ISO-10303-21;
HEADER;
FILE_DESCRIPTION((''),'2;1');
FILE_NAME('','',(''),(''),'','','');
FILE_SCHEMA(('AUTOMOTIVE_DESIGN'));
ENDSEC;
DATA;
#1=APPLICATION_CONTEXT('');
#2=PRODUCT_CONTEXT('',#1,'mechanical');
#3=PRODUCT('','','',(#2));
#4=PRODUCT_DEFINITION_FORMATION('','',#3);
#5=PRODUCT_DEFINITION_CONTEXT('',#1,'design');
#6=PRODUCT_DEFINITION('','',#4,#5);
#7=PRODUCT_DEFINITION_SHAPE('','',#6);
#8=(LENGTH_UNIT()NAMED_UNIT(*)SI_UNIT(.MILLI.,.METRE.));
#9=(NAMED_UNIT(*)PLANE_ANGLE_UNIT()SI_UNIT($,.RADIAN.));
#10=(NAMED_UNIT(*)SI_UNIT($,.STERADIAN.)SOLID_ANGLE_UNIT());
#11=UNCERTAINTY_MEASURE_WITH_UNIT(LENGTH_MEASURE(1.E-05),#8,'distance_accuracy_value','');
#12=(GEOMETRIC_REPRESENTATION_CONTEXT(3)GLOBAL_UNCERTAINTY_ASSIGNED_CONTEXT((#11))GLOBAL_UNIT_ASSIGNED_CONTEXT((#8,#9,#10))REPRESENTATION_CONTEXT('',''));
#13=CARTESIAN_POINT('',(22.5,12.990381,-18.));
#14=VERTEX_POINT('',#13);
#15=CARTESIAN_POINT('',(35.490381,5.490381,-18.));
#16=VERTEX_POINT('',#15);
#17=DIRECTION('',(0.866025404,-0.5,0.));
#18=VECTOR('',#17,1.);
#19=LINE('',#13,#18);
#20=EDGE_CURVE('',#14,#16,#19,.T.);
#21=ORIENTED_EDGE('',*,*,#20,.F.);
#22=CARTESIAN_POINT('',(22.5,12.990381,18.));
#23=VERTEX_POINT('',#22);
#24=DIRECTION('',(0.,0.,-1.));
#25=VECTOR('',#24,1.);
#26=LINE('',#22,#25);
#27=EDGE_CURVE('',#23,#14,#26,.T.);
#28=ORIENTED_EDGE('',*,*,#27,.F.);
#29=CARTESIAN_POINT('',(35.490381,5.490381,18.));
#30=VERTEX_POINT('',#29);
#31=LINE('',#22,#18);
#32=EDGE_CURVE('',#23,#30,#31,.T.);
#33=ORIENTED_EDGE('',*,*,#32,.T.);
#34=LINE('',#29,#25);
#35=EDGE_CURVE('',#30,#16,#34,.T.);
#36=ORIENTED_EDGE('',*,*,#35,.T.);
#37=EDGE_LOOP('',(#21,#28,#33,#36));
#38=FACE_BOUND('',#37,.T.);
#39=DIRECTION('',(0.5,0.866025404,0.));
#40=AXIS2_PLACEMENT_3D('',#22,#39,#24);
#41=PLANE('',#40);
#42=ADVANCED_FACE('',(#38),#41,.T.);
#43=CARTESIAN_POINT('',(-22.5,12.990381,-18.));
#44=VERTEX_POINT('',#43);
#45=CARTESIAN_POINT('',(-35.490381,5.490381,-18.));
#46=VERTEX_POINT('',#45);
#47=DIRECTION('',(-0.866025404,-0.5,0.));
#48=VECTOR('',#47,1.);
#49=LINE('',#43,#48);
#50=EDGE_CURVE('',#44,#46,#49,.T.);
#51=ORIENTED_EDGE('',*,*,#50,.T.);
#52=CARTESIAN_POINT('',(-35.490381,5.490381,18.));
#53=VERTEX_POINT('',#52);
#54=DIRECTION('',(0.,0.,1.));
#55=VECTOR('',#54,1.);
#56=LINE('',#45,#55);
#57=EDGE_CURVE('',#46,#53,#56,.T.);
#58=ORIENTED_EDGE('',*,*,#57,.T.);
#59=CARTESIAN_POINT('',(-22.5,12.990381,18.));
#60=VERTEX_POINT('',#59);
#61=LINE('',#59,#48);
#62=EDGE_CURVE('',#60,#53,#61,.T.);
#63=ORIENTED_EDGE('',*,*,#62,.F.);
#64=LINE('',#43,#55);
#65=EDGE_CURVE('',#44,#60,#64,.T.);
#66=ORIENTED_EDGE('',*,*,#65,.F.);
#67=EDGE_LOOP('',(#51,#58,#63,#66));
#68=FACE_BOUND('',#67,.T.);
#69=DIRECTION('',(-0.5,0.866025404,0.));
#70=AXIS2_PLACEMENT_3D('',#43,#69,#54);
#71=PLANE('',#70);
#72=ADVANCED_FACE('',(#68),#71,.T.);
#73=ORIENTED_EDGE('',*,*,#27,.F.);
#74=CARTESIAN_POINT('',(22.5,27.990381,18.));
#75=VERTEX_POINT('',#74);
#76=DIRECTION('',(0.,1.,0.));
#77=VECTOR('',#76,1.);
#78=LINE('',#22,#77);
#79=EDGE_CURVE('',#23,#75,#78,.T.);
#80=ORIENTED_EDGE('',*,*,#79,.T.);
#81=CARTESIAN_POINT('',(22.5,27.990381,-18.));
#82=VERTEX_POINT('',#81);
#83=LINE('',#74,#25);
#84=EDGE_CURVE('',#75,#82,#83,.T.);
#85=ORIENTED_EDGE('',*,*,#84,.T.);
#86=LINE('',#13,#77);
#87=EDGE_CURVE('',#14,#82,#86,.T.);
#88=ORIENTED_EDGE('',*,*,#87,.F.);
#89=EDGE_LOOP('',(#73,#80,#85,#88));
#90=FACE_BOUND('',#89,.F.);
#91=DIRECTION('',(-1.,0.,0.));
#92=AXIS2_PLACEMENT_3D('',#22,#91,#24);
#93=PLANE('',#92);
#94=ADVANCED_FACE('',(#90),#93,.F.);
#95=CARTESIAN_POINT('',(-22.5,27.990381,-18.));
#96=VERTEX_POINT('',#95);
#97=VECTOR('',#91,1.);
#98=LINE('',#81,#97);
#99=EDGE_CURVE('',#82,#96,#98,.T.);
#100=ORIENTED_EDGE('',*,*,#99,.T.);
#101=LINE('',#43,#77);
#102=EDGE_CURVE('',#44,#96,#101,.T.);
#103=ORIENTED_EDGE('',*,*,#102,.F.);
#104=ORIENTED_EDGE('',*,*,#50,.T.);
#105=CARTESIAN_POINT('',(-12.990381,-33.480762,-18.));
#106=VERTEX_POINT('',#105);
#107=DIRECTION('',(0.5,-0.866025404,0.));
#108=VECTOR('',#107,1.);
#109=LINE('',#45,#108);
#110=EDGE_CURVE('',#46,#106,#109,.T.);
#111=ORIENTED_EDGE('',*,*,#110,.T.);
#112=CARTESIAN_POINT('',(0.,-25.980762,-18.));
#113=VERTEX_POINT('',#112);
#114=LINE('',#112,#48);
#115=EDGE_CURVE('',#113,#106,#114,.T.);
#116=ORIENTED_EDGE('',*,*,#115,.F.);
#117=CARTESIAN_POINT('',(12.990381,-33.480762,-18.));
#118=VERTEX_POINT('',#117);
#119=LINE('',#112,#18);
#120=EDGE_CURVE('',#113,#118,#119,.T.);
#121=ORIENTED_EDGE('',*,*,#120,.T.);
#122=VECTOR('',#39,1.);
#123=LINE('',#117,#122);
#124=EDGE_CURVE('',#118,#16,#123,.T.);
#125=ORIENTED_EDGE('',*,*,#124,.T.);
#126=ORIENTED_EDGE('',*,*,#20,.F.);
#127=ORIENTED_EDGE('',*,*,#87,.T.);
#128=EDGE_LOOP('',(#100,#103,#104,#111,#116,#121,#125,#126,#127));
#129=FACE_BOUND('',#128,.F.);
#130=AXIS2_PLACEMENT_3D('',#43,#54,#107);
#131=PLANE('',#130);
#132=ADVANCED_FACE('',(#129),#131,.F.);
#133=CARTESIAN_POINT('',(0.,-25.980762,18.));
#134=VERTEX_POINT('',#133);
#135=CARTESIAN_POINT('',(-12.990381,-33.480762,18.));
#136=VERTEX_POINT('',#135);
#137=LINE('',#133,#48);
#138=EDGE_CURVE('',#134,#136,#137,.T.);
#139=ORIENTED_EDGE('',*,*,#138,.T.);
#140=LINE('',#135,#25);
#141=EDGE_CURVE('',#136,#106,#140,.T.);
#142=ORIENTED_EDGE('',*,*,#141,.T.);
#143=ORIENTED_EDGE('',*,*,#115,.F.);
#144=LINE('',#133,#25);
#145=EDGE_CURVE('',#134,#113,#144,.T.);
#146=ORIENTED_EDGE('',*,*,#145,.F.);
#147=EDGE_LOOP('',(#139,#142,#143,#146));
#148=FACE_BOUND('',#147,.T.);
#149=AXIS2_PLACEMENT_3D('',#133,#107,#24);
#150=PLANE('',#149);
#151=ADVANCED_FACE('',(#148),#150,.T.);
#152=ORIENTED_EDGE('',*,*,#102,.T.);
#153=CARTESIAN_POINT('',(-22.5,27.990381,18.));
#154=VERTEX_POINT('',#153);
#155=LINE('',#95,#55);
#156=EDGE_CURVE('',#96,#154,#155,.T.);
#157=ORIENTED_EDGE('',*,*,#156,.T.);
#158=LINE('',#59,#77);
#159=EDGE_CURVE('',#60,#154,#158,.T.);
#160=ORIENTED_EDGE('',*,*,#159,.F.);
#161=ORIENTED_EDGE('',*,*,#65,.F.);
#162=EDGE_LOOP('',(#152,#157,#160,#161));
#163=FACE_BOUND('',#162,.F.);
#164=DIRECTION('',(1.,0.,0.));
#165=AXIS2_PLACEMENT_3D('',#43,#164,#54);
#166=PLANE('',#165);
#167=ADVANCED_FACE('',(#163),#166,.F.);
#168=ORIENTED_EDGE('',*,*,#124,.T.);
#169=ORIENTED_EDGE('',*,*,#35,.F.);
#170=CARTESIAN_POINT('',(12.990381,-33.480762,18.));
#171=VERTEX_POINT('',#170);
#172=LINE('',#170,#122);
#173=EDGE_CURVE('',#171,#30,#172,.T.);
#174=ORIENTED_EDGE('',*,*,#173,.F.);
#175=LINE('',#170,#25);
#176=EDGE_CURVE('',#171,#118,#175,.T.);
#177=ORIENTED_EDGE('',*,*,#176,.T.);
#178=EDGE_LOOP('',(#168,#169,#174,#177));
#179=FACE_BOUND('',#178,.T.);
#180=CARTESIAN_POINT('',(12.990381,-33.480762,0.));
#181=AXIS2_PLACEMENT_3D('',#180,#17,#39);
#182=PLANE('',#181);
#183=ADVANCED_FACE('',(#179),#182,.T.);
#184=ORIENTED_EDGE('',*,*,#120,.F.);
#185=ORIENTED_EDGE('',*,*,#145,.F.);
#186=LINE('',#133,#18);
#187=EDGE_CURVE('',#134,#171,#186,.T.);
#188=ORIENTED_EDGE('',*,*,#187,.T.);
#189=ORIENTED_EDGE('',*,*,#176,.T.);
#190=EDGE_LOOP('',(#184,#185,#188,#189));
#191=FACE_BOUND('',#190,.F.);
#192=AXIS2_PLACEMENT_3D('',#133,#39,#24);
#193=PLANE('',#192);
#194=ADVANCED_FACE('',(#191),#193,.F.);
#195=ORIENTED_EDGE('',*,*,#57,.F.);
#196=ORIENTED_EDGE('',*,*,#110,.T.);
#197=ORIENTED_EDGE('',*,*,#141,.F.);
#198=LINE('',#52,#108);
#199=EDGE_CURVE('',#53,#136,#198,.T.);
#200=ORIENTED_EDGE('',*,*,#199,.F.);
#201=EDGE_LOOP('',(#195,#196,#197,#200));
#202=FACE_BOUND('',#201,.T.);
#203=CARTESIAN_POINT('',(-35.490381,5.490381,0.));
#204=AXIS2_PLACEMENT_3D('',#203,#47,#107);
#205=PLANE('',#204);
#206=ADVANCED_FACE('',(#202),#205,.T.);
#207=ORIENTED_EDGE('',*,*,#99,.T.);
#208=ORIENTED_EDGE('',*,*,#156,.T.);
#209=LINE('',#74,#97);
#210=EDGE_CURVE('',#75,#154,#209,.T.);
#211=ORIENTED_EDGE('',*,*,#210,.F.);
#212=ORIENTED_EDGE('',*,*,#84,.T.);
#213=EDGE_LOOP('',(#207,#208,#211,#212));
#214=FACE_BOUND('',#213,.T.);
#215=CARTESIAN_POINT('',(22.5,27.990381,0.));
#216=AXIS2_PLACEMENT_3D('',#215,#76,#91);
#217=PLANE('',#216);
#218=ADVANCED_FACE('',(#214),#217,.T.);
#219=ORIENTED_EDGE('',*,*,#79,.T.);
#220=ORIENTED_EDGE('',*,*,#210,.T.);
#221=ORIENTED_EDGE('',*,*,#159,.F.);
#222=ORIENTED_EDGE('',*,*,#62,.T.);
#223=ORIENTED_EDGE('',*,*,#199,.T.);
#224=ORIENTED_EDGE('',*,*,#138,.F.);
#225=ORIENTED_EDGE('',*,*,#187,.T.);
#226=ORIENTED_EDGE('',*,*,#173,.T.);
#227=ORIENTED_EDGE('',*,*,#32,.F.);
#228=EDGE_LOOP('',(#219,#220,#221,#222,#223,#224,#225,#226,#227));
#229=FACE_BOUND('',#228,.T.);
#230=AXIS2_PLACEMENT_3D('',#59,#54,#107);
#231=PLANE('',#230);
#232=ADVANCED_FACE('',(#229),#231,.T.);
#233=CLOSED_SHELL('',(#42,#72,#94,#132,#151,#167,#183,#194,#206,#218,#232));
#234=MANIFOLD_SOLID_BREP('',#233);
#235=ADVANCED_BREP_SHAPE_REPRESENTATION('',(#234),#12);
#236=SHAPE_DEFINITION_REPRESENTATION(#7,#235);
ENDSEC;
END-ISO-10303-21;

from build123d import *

# Parameters (mm, degrees)
F1_DEPTH = 18
F2_DEPTH = 15
F3_DEPTH = 15
F4_DEPTH = 15


# Not quite as in the source:
# - the program builds the solid bodies; features that only make, move or delete a surface that nothing else refers to are left out


with BuildPart() as f1:
    # F0 (on Top) → F1 (new body, symmetric)
    with BuildSketch(Plane.XY):
        Polygon((22.5, 12.9903810568), (-22.5, 12.9903810568), (0, -25.9807621135), align=None)
    extrude(amount=F1_DEPTH, both=True)

    # F2 (add): a face of the model
    f2_faces = [f1.faces().sort_by_distance(p)[0] for p in [
        (11.25, -6.4951905284, 0),
    ]]
    extrude(f2_faces, amount=F2_DEPTH)

    # F3 (add): a face of the model
    f3_faces = [f1.faces().sort_by_distance(p)[0] for p in [
        (0, 12.9903810568, 0),
    ]]
    extrude(f3_faces, amount=F3_DEPTH)

    # F4 (add): a face of the model
    f4_faces = [f1.faces().sort_by_distance(p)[0] for p in [
        (-11.25, -6.4951905284, 0),
    ]]
    extrude(f4_faces, amount=F4_DEPTH)


solid = f1.part
